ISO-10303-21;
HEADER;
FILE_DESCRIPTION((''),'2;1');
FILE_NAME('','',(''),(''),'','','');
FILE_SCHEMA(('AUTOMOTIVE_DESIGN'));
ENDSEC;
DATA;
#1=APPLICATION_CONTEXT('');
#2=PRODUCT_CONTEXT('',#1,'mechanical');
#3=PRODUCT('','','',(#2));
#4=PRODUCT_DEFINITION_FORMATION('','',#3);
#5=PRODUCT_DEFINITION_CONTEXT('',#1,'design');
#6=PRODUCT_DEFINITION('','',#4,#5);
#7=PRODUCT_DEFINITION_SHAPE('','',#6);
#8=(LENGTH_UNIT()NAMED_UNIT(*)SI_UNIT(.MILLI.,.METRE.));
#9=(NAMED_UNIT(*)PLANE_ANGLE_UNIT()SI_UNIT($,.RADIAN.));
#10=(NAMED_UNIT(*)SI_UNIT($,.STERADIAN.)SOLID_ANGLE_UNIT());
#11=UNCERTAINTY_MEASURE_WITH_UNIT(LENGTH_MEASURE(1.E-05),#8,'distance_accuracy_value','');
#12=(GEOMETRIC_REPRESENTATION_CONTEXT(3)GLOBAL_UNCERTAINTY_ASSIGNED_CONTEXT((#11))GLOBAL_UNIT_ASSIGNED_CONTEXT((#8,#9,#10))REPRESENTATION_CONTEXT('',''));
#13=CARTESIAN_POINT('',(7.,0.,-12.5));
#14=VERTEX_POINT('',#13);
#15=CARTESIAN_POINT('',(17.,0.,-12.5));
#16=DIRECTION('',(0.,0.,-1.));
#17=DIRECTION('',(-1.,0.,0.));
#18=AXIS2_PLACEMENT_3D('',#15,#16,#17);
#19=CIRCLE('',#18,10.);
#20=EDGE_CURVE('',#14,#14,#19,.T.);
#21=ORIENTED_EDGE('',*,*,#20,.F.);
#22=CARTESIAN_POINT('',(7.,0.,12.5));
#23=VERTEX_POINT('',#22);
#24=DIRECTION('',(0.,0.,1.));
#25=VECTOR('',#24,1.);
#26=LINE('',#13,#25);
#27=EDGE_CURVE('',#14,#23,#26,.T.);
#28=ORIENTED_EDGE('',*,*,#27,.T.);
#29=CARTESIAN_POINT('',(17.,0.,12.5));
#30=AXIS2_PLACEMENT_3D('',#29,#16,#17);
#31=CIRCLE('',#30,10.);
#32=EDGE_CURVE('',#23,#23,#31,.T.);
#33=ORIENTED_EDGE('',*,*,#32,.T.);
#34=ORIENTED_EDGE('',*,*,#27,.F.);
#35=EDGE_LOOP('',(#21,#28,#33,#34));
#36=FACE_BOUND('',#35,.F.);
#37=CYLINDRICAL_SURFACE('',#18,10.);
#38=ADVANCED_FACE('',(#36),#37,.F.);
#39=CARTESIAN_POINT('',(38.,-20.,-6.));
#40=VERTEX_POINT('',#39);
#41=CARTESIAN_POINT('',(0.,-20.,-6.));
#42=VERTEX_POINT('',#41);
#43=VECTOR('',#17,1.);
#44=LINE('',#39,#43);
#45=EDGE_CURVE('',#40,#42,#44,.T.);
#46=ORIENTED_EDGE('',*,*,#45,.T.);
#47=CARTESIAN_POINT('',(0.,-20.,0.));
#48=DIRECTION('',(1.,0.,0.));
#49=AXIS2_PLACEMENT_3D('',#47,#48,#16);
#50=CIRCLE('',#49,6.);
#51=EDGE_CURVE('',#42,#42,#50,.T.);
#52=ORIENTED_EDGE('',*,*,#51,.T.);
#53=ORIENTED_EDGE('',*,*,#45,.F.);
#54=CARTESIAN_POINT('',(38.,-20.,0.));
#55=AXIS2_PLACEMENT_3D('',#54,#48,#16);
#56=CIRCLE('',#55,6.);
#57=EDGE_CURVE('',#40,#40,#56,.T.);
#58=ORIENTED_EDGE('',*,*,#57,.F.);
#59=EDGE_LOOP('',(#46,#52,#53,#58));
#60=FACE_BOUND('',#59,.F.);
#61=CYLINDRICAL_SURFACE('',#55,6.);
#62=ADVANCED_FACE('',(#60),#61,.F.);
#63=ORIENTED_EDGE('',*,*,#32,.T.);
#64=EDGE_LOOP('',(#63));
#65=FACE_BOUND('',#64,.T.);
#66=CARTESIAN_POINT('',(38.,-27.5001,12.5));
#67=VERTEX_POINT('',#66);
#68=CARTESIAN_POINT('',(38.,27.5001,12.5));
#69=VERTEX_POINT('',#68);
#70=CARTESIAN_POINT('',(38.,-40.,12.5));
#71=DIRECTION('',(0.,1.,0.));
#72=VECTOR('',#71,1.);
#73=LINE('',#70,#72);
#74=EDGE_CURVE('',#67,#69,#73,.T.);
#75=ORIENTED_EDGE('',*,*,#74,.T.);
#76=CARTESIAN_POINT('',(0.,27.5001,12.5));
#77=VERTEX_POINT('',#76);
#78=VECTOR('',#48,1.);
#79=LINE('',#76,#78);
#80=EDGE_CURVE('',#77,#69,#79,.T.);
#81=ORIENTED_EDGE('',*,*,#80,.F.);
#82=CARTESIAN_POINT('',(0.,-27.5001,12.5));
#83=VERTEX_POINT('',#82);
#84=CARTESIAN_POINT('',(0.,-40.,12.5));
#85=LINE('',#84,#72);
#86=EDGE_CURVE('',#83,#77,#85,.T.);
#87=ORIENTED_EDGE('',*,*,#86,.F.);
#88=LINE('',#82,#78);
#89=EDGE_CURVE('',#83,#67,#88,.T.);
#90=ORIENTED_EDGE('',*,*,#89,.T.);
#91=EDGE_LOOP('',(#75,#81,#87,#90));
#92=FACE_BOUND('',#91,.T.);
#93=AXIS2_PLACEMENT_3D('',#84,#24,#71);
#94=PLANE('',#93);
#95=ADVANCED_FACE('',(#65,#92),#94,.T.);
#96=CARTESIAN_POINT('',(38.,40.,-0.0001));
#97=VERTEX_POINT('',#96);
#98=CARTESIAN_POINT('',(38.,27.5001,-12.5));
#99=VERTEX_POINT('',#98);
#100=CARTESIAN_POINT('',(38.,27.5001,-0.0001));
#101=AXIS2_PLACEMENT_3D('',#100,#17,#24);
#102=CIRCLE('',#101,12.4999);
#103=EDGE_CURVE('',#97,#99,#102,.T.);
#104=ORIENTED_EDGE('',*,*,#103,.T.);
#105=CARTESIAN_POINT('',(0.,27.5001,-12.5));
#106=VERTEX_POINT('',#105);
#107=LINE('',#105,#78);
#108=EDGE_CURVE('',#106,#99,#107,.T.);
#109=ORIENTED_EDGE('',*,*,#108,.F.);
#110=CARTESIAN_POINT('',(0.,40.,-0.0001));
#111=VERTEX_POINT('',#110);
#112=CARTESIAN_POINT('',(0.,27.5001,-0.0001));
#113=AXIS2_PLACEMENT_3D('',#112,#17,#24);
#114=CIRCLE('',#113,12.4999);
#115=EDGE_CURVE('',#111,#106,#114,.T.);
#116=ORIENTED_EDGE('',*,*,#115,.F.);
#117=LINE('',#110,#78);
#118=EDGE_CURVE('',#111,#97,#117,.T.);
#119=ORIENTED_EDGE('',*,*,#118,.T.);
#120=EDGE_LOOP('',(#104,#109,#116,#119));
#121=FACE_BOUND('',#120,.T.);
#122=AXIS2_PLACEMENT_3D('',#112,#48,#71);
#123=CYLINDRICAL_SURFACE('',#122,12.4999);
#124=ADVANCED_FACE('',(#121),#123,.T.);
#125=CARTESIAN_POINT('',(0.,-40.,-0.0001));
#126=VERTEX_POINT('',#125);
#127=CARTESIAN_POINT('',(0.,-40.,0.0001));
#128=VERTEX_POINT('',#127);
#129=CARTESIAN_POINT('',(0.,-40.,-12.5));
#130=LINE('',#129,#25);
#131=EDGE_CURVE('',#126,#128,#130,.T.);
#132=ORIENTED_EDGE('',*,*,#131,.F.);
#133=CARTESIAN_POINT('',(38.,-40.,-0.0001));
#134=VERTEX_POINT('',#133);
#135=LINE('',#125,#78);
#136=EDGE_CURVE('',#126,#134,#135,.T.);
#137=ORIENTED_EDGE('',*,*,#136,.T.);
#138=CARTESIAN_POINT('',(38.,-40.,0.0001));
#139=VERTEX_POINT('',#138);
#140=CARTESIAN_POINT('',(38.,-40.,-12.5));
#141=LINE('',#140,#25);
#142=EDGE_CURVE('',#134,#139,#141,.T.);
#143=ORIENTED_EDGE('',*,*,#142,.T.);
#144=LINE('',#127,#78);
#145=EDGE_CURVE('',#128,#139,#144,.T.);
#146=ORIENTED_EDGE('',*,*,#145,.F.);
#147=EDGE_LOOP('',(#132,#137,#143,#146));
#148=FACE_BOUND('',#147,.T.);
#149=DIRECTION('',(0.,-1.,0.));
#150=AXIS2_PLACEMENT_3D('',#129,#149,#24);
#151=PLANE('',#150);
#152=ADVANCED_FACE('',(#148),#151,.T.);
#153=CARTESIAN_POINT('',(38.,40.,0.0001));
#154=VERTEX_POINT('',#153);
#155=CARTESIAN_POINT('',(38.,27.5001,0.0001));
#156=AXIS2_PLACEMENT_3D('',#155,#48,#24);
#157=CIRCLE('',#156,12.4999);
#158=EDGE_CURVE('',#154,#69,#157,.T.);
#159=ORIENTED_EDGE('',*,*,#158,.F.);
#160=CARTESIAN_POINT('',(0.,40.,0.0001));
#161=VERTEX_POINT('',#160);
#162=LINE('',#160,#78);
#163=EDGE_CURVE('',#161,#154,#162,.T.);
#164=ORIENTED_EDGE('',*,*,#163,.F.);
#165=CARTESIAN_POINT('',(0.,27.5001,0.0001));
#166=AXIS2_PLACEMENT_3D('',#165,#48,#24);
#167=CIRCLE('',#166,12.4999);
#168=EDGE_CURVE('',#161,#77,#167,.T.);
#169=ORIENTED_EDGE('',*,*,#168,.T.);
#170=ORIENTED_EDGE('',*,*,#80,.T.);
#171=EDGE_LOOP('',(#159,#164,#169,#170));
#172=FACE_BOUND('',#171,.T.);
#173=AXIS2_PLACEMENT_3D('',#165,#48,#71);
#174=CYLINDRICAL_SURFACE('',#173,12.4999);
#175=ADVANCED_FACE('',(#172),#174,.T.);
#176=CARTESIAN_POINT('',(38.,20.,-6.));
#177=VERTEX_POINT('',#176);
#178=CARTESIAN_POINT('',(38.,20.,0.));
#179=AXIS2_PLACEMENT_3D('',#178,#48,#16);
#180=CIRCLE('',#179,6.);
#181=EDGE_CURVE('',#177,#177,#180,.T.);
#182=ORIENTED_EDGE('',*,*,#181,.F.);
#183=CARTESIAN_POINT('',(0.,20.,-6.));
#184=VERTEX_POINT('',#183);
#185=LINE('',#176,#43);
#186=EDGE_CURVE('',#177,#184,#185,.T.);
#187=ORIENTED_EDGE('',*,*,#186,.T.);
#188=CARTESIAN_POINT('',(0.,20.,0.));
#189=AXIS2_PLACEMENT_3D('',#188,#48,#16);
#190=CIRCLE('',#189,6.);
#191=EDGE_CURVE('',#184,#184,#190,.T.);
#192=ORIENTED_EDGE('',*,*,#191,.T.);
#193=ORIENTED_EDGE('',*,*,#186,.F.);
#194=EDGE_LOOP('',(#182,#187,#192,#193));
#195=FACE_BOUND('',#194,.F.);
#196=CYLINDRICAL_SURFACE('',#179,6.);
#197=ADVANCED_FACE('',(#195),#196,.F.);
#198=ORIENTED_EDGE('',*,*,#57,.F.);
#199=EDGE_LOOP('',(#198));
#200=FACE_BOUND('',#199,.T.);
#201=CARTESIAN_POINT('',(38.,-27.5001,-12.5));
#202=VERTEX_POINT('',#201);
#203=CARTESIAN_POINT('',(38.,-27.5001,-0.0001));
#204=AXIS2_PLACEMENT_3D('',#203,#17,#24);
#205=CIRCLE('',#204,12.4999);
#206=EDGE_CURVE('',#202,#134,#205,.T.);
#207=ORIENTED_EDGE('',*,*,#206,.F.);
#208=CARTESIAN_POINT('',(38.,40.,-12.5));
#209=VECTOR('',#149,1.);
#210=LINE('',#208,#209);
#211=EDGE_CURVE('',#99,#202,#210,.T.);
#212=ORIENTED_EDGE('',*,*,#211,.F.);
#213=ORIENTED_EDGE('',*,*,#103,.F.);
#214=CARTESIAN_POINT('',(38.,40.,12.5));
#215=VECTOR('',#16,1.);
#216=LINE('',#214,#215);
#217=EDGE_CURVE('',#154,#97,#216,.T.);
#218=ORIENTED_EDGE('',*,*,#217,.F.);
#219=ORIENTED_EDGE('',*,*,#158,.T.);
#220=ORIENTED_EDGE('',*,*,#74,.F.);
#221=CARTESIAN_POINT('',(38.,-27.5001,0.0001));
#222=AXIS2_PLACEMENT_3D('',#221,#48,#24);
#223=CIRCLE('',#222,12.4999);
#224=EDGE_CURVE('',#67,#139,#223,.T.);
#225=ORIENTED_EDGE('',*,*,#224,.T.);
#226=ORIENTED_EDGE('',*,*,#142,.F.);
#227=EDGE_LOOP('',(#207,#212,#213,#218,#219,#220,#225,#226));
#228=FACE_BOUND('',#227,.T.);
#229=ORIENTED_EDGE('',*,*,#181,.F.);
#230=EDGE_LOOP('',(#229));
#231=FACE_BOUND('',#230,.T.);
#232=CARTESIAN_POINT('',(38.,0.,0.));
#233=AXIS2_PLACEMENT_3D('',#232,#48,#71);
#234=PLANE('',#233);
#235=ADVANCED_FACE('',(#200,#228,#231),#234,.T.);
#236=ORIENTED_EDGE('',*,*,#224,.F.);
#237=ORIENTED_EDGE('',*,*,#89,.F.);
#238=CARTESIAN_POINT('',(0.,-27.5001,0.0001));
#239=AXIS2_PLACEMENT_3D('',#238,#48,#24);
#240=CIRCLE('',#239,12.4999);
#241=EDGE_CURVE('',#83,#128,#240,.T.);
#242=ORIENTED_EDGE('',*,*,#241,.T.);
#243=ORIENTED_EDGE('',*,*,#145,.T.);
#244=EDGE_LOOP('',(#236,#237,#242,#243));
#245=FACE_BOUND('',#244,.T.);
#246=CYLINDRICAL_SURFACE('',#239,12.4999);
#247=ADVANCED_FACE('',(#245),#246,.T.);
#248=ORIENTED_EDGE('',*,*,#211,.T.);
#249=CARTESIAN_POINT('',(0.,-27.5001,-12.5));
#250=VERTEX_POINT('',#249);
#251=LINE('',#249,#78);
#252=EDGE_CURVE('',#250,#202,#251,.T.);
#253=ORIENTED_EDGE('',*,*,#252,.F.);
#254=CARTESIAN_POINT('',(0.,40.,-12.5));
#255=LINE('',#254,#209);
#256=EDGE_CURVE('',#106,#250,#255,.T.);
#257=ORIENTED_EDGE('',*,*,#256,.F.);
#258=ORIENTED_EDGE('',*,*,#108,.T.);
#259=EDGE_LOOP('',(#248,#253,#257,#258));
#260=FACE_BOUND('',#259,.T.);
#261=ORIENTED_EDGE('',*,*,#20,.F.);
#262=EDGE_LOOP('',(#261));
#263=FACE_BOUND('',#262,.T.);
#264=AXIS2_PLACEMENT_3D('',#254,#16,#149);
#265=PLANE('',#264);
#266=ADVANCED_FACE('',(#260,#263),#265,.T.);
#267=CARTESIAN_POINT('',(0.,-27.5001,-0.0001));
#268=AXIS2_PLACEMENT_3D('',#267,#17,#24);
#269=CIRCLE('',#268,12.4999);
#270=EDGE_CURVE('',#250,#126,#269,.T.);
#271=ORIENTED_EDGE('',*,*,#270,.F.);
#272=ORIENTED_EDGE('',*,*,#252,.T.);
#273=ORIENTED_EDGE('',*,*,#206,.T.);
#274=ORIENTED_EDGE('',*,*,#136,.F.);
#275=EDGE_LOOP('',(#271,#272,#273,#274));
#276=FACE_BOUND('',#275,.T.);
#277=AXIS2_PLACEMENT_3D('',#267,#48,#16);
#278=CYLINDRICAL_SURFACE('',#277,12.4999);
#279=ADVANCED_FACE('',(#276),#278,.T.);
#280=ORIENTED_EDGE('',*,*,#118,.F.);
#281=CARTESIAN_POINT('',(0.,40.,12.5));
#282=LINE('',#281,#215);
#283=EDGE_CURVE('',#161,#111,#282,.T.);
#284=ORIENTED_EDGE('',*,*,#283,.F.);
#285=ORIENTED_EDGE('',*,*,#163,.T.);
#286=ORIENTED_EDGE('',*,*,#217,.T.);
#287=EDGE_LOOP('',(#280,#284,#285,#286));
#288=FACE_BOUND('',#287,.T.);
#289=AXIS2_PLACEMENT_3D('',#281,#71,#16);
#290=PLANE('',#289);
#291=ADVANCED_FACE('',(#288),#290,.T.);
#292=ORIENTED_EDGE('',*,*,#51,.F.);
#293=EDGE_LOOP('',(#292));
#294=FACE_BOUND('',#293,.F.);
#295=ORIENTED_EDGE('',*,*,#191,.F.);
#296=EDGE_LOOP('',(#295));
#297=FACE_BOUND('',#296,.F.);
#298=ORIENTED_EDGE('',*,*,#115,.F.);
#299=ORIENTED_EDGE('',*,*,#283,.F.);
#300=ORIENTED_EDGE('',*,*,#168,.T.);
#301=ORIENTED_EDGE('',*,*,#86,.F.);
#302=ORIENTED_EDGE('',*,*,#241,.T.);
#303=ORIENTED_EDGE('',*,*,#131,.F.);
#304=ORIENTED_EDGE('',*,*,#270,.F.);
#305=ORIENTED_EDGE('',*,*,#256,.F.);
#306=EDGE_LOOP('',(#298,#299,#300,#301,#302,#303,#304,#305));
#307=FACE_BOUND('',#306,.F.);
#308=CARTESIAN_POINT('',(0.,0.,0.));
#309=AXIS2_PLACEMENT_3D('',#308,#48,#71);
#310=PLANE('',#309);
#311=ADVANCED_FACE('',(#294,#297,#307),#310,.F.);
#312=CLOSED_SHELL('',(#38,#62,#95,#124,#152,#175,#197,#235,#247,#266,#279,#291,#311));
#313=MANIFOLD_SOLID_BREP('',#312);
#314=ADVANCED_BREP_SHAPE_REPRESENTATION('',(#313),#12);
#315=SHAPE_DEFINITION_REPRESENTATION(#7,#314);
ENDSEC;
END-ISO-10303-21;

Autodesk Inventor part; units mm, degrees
ref_plane "YZ Plane" through (0, 0, 0) normal (1, 0, 0) x (0, 1, 0)
ref_plane "XZ Plane" through (0, 0, 0) normal (0, 1, 0) x (-1, 0, 0)
ref_plane "XY Plane" through (0, 0, 0) normal (0, 0, 1) x (1, 0, 0)
sketch "Sketch2" plane through (0, 0, 0) normal (1, 0, 0) x (0, 1, 0)
  line L0 (40, 12.5) -> (40, -12.5)
  line L1 (40, -12.5) -> (-40, -12.5)
  line L2 (-40, -12.5) -> (-40, 12.5)
  line L3 (-40, 12.5) -> (40, 12.5)
  point P0 (0, 0)
  dimension "d11" = 25
  dimension "d12" = 80
  dimension "d13" = 40
  dimension "d14" = 12.5
extrude "Extrusion2" add sketch "Sketch2" along normal blind 38
full round fillet "Full Round Fillet1" first side at (25.3333, 13.3333, 12.5) centre faces at (12.6667, 40, -4.1667) second side at (25.3333, -13.3333, -12.5)
full round fillet "Full Round Fillet2" first side at (25.3333, 5.0001, 12.5) centre faces at (12.6667, -40, 4.1667) second side at (25.3333, -17.5, -12.5)
sketch "Sketch3" plane through (38, 27.5, -12.5) normal (0, 0, -1) x (-1, 0, 0)
  circle A0 centre (21, -27.5) radius 10
  line L0 (38, -55) -> (38, 0) projected
  point P0 (38, -27.5)
  point P1 (38, -27.5)
  dimension "d15" = 20
  dimension "d16" = 17
sketch "Sketch4" plane through (38, 0, 0) normal (1, 0, 0) x (0, 0, -1)
  circle A0 centre (0, -20) radius 6
  circle A1 centre (0, 20) radius 6
  point P0 (0, 0)
  dimension "d17" = 12
  dimension "d18" = 12
  dimension "d31" = 40
  dimension "d32" = 20
extrude "Extrusion3" cut sketch "Sketch3" against normal blind 42
extrude "Extrusion4" cut sketch "Sketch4" against normal blind 42
thread "Thread4" size "M20x2.5" class "6H" standard "ANSI Metric M Profile" full length
thread "Thread7" size "M12x1.75" class "6H" standard "ANSI Metric M Profile" length 350
thread "Thread8" size "M12x1.75" class "6H" standard "ANSI Metric M Profile" length 350
properties part number "Junção Fuso" material "Steel AISI 4142 380 QT"
